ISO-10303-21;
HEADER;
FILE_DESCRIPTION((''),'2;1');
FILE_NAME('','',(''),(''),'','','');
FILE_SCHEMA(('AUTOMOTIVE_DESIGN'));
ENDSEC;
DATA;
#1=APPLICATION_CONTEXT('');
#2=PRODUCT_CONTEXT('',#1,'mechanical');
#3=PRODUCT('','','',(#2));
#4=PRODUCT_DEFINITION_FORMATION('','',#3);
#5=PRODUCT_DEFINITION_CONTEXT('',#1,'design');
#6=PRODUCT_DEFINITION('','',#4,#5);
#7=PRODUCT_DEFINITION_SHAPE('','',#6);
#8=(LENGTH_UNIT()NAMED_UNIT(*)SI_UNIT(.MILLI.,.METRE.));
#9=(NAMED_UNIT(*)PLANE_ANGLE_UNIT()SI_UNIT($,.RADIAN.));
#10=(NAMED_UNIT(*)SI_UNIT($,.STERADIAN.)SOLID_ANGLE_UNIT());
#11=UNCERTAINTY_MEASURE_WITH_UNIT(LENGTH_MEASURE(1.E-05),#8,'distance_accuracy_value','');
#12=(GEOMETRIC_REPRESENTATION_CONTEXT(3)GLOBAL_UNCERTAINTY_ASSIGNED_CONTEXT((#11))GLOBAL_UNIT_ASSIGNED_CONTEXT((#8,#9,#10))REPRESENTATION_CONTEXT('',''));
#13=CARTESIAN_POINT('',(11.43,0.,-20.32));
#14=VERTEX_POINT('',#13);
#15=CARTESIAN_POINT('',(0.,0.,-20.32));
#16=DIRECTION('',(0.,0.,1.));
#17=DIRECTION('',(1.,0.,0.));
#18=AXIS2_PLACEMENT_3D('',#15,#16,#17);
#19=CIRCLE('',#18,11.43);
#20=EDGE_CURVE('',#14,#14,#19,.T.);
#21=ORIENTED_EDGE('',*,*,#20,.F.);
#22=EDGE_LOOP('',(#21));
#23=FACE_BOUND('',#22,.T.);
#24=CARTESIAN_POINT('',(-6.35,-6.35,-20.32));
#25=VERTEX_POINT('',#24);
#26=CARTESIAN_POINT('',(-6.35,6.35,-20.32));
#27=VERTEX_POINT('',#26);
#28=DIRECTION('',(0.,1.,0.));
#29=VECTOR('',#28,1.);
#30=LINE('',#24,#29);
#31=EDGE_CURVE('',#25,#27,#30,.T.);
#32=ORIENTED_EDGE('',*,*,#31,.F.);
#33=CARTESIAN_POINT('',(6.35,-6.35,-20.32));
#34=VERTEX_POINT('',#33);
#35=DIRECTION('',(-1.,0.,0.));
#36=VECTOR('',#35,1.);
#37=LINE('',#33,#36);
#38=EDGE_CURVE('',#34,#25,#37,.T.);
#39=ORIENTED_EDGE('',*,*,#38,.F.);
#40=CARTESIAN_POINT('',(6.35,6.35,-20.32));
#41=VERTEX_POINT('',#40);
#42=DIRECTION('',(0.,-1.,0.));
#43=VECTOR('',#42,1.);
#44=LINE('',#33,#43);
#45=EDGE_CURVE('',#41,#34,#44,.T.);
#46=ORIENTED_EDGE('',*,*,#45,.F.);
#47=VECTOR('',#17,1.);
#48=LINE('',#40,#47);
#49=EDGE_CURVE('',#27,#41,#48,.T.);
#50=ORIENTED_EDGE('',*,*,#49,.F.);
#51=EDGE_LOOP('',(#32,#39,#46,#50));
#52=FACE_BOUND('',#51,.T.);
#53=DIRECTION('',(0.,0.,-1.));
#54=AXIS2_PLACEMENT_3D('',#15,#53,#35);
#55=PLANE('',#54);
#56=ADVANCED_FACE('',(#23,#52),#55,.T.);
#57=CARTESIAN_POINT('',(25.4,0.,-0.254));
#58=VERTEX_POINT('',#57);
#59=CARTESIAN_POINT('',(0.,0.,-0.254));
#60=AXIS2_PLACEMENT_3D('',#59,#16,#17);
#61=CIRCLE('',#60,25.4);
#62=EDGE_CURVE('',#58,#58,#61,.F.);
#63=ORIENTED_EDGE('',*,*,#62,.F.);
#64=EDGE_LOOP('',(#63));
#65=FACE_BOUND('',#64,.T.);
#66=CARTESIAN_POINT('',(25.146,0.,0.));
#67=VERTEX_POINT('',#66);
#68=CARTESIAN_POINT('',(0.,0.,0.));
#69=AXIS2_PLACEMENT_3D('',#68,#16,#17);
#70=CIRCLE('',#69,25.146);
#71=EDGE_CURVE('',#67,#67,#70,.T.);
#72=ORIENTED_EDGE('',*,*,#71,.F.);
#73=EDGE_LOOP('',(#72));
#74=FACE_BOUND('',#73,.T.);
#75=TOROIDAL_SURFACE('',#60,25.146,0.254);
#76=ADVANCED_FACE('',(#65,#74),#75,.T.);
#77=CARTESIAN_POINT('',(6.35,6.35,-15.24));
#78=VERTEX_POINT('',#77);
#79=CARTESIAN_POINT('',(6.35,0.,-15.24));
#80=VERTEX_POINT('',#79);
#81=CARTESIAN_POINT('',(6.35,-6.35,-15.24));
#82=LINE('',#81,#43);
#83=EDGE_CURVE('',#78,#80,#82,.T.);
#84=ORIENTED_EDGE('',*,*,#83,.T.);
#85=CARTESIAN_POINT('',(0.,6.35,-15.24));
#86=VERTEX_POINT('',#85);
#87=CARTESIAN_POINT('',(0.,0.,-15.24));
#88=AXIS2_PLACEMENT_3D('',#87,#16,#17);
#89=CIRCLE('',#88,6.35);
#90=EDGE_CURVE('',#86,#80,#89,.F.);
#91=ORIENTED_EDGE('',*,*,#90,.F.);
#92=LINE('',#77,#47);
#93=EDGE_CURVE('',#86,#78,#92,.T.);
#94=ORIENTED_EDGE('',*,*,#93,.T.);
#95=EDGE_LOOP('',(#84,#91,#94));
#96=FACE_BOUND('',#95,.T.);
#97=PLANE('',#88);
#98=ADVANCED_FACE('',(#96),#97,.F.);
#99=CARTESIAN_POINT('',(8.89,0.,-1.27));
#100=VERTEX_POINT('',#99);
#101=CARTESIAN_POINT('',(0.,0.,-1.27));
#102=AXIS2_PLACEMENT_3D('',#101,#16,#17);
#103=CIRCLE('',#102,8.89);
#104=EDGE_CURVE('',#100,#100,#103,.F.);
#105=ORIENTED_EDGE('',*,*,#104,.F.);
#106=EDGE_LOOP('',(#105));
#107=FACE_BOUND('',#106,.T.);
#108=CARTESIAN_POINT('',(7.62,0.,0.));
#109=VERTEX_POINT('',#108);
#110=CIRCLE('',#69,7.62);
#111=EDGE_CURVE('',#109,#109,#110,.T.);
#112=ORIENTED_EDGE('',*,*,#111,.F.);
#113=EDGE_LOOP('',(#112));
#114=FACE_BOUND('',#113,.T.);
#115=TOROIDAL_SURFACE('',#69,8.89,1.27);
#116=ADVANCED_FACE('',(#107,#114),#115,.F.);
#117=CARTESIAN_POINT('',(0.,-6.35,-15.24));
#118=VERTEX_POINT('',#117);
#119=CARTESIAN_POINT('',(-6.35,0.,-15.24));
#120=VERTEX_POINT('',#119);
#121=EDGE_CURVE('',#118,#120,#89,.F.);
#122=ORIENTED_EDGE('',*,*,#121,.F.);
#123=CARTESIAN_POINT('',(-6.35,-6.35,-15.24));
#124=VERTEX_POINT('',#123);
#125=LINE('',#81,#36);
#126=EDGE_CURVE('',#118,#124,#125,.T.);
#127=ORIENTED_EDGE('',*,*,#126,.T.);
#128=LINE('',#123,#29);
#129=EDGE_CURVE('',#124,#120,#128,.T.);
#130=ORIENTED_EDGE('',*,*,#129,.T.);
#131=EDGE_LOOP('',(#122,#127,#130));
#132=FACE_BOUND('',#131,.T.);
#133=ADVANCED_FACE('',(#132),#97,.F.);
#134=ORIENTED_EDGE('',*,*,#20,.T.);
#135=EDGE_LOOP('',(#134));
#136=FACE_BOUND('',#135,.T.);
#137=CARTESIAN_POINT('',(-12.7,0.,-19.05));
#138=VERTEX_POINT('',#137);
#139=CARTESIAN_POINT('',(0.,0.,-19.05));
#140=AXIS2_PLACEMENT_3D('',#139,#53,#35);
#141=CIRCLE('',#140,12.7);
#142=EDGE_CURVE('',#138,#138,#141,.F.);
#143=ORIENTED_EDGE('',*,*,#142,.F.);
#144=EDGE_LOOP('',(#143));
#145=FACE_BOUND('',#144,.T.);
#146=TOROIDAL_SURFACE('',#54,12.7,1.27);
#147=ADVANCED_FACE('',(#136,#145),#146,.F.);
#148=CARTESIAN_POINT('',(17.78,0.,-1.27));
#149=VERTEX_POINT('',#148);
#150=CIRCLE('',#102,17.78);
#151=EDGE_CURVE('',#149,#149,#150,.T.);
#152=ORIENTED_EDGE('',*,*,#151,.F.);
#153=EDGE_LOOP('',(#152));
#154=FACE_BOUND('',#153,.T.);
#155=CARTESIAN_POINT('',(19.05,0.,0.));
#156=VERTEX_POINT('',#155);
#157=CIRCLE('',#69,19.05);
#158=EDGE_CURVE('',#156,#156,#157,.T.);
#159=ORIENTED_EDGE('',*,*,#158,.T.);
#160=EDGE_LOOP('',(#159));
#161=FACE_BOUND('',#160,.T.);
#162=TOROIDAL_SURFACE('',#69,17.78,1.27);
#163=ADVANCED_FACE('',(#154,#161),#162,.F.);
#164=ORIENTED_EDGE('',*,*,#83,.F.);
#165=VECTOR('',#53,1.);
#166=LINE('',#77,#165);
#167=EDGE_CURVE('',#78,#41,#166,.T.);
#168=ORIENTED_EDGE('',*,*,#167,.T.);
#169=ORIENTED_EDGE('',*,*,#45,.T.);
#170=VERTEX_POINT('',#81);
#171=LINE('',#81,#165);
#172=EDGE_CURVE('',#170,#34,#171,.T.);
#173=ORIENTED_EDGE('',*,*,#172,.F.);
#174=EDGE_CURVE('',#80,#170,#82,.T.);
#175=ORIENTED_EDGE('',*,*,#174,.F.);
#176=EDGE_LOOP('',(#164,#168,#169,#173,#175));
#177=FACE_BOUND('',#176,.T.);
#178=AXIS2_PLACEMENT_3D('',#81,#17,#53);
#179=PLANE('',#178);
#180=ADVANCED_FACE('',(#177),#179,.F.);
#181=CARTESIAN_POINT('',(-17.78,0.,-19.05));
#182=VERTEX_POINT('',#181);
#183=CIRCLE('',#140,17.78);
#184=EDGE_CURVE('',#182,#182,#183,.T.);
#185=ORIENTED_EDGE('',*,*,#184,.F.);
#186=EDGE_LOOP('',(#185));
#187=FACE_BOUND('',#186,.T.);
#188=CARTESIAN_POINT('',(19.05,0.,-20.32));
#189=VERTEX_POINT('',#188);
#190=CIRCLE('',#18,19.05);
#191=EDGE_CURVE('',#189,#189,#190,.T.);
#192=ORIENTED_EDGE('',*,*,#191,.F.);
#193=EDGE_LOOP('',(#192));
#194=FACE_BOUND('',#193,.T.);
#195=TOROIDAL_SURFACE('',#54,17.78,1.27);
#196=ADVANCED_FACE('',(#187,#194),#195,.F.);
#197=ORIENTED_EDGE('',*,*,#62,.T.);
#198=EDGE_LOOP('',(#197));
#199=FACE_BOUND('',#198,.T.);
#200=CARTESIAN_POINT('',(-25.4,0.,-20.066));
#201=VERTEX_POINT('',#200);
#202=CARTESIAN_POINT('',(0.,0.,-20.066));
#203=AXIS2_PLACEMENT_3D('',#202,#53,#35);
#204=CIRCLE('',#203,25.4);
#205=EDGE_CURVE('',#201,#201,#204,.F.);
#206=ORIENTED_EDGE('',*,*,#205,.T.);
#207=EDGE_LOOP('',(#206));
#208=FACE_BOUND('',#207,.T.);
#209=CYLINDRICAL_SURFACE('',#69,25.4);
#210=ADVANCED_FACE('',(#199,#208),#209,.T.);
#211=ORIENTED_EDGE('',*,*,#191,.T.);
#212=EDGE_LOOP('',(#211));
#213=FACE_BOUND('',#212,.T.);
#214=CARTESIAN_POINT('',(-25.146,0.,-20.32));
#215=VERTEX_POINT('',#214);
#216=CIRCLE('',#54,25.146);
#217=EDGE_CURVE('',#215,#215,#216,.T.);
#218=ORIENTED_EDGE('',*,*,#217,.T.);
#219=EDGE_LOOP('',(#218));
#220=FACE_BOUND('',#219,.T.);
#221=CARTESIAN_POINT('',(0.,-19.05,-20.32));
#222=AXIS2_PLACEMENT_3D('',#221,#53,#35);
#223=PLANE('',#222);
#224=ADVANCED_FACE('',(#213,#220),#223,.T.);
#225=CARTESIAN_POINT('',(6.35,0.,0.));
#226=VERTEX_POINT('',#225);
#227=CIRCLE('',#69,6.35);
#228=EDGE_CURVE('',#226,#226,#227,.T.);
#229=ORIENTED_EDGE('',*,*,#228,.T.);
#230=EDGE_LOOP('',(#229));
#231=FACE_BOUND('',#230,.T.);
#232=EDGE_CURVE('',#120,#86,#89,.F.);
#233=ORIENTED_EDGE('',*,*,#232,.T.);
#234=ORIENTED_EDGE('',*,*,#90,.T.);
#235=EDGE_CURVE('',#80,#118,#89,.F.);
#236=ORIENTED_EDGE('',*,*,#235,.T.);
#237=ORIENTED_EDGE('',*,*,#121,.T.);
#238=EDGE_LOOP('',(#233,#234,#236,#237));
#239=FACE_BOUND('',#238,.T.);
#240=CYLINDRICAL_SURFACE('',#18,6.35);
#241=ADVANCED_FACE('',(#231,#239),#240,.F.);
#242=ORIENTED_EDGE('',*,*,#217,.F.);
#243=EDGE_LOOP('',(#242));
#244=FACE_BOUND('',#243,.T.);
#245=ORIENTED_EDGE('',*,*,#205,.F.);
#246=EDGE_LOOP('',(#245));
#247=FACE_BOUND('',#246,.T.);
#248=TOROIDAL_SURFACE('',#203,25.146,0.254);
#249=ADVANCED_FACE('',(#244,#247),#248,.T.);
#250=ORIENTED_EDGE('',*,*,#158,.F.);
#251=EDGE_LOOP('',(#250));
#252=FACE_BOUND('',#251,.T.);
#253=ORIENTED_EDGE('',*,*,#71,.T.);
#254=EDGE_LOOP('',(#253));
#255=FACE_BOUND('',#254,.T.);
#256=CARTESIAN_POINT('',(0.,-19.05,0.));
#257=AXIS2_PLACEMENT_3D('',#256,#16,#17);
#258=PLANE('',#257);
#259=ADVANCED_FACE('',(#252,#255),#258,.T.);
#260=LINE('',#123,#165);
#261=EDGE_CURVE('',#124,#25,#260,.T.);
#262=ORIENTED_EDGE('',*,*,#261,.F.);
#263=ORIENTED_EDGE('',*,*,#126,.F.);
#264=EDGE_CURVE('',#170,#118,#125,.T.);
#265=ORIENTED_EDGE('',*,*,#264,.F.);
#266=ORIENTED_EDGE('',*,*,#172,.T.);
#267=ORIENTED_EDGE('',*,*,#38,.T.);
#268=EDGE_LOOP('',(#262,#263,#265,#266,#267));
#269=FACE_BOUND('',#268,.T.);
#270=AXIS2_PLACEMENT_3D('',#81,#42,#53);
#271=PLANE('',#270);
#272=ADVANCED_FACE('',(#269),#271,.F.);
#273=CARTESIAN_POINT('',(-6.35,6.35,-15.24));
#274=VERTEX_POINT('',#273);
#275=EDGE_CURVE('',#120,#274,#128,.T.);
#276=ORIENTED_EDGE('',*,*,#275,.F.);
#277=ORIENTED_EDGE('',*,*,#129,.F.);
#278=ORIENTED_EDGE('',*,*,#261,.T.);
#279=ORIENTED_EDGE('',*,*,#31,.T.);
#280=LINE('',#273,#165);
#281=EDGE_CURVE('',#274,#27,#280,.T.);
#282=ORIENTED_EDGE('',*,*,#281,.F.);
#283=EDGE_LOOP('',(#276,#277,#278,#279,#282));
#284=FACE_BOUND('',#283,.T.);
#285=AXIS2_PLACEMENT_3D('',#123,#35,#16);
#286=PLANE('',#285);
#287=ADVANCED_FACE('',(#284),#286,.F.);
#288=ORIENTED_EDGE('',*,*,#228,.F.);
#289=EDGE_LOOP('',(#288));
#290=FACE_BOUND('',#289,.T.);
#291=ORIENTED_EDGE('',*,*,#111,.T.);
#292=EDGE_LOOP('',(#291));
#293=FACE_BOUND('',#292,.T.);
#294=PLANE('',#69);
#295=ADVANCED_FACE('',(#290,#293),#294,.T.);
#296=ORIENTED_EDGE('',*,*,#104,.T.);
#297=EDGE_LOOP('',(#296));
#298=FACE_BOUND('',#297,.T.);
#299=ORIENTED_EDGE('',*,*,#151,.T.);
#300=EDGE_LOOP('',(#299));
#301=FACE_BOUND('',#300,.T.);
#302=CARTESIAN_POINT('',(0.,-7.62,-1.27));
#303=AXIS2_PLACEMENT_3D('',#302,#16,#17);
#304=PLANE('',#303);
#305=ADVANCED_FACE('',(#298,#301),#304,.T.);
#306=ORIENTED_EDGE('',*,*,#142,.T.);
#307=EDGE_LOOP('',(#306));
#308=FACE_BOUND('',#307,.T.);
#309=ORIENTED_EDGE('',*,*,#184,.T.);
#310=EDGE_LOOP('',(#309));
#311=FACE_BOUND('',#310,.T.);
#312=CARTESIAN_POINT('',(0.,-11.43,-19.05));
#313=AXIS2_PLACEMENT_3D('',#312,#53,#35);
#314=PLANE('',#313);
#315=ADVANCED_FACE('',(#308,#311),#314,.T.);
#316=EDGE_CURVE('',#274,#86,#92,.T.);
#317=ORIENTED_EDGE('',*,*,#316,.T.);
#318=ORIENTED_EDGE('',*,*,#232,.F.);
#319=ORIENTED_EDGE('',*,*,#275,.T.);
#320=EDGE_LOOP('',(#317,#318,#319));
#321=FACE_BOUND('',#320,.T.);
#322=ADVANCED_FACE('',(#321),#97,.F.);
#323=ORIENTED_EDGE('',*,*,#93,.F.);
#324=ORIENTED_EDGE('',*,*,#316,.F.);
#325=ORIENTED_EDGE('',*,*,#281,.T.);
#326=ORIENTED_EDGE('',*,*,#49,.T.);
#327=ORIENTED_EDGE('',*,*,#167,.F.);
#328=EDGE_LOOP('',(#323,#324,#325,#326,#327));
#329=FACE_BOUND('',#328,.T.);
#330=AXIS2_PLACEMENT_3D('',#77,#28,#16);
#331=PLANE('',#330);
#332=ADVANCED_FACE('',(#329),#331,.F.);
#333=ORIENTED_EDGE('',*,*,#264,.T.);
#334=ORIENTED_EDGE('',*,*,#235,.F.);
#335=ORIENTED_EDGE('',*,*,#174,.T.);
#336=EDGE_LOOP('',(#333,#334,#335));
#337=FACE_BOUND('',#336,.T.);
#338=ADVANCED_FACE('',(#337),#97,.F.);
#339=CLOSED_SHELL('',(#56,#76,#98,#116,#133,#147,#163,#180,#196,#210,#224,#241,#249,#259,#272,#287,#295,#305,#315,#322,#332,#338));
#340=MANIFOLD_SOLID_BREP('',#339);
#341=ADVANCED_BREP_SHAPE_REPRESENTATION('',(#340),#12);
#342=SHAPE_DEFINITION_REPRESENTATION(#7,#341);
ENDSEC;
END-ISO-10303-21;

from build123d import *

# Parameters (mm, degrees)
SKETCH3_R          = 6.35
CUT_EXTRUDE1_DEPTH = 42.270115096
FILLET1_R          = 1.27
FILLET2_R          = 0.254
SKETCH4_W          = 12.7
SKETCH4_H          = 12.7
CUT_EXTRUDE2_DEPTH = 5.08


with BuildPart() as part:
    # Sketch2 → Revolve1 (revolve)
    with BuildSketch(Plane(origin=(0, 0, 0), x_dir=(0, 0, -1), z_dir=(1, 0, 0)), mode=Mode.PRIVATE) as revolve1_sk:
        Polygon((0, -7.62), (1.27, -7.62), (1.27, -19.05), (0, -19.05), (0, -25.4), (20.32, -25.4), (20.32, -19.05), (19.05, -19.05), (19.05, -11.43), (20.32, -11.43), (20.32, 0), (0, 0), align=None)
    revolve(revolve1_sk.sketch.rotate(Axis((0, 0, 0), (0, 0, -1)), 270), axis=Axis((0, 0, 0), (0, 0, -1)))

    # Sketch3 → Cut-Extrude1 (cut, through all)
    with BuildSketch(Plane.XY):
        Circle(SKETCH3_R)
    extrude(amount=-CUT_EXTRUDE1_DEPTH, mode=Mode.SUBTRACT)

    # Fillet1
    fillet1_edges = [part.edges().sort_by_distance(p)[0] for p in [
        (-19.05, 0, -19.05),
        (-19.05, 0, -1.27),
        (-7.62, 0, -1.27),
        (-11.43, 0, -19.05),
    ]]
    fillet(fillet1_edges, radius=FILLET1_R - 0.0001)  # a hair under: the kernel refuses the full size

    # Fillet2
    fillet2_edges = [part.edges().sort_by_distance(p)[0] for p in [
        (-25.4, 0, -20.32),
        (-25.4, 0, 0),
    ]]
    fillet(fillet2_edges, radius=FILLET2_R)

    # Sketch4 → Cut-Extrude2 (cut)
    with BuildSketch(Plane(origin=(0, 0, -20.32), x_dir=(-1, 0, 0), z_dir=(0, 0, -1))):
        Rectangle(SKETCH4_W, SKETCH4_H)
    extrude(amount=-CUT_EXTRUDE2_DEPTH, mode=Mode.SUBTRACT)


solid = part.part
